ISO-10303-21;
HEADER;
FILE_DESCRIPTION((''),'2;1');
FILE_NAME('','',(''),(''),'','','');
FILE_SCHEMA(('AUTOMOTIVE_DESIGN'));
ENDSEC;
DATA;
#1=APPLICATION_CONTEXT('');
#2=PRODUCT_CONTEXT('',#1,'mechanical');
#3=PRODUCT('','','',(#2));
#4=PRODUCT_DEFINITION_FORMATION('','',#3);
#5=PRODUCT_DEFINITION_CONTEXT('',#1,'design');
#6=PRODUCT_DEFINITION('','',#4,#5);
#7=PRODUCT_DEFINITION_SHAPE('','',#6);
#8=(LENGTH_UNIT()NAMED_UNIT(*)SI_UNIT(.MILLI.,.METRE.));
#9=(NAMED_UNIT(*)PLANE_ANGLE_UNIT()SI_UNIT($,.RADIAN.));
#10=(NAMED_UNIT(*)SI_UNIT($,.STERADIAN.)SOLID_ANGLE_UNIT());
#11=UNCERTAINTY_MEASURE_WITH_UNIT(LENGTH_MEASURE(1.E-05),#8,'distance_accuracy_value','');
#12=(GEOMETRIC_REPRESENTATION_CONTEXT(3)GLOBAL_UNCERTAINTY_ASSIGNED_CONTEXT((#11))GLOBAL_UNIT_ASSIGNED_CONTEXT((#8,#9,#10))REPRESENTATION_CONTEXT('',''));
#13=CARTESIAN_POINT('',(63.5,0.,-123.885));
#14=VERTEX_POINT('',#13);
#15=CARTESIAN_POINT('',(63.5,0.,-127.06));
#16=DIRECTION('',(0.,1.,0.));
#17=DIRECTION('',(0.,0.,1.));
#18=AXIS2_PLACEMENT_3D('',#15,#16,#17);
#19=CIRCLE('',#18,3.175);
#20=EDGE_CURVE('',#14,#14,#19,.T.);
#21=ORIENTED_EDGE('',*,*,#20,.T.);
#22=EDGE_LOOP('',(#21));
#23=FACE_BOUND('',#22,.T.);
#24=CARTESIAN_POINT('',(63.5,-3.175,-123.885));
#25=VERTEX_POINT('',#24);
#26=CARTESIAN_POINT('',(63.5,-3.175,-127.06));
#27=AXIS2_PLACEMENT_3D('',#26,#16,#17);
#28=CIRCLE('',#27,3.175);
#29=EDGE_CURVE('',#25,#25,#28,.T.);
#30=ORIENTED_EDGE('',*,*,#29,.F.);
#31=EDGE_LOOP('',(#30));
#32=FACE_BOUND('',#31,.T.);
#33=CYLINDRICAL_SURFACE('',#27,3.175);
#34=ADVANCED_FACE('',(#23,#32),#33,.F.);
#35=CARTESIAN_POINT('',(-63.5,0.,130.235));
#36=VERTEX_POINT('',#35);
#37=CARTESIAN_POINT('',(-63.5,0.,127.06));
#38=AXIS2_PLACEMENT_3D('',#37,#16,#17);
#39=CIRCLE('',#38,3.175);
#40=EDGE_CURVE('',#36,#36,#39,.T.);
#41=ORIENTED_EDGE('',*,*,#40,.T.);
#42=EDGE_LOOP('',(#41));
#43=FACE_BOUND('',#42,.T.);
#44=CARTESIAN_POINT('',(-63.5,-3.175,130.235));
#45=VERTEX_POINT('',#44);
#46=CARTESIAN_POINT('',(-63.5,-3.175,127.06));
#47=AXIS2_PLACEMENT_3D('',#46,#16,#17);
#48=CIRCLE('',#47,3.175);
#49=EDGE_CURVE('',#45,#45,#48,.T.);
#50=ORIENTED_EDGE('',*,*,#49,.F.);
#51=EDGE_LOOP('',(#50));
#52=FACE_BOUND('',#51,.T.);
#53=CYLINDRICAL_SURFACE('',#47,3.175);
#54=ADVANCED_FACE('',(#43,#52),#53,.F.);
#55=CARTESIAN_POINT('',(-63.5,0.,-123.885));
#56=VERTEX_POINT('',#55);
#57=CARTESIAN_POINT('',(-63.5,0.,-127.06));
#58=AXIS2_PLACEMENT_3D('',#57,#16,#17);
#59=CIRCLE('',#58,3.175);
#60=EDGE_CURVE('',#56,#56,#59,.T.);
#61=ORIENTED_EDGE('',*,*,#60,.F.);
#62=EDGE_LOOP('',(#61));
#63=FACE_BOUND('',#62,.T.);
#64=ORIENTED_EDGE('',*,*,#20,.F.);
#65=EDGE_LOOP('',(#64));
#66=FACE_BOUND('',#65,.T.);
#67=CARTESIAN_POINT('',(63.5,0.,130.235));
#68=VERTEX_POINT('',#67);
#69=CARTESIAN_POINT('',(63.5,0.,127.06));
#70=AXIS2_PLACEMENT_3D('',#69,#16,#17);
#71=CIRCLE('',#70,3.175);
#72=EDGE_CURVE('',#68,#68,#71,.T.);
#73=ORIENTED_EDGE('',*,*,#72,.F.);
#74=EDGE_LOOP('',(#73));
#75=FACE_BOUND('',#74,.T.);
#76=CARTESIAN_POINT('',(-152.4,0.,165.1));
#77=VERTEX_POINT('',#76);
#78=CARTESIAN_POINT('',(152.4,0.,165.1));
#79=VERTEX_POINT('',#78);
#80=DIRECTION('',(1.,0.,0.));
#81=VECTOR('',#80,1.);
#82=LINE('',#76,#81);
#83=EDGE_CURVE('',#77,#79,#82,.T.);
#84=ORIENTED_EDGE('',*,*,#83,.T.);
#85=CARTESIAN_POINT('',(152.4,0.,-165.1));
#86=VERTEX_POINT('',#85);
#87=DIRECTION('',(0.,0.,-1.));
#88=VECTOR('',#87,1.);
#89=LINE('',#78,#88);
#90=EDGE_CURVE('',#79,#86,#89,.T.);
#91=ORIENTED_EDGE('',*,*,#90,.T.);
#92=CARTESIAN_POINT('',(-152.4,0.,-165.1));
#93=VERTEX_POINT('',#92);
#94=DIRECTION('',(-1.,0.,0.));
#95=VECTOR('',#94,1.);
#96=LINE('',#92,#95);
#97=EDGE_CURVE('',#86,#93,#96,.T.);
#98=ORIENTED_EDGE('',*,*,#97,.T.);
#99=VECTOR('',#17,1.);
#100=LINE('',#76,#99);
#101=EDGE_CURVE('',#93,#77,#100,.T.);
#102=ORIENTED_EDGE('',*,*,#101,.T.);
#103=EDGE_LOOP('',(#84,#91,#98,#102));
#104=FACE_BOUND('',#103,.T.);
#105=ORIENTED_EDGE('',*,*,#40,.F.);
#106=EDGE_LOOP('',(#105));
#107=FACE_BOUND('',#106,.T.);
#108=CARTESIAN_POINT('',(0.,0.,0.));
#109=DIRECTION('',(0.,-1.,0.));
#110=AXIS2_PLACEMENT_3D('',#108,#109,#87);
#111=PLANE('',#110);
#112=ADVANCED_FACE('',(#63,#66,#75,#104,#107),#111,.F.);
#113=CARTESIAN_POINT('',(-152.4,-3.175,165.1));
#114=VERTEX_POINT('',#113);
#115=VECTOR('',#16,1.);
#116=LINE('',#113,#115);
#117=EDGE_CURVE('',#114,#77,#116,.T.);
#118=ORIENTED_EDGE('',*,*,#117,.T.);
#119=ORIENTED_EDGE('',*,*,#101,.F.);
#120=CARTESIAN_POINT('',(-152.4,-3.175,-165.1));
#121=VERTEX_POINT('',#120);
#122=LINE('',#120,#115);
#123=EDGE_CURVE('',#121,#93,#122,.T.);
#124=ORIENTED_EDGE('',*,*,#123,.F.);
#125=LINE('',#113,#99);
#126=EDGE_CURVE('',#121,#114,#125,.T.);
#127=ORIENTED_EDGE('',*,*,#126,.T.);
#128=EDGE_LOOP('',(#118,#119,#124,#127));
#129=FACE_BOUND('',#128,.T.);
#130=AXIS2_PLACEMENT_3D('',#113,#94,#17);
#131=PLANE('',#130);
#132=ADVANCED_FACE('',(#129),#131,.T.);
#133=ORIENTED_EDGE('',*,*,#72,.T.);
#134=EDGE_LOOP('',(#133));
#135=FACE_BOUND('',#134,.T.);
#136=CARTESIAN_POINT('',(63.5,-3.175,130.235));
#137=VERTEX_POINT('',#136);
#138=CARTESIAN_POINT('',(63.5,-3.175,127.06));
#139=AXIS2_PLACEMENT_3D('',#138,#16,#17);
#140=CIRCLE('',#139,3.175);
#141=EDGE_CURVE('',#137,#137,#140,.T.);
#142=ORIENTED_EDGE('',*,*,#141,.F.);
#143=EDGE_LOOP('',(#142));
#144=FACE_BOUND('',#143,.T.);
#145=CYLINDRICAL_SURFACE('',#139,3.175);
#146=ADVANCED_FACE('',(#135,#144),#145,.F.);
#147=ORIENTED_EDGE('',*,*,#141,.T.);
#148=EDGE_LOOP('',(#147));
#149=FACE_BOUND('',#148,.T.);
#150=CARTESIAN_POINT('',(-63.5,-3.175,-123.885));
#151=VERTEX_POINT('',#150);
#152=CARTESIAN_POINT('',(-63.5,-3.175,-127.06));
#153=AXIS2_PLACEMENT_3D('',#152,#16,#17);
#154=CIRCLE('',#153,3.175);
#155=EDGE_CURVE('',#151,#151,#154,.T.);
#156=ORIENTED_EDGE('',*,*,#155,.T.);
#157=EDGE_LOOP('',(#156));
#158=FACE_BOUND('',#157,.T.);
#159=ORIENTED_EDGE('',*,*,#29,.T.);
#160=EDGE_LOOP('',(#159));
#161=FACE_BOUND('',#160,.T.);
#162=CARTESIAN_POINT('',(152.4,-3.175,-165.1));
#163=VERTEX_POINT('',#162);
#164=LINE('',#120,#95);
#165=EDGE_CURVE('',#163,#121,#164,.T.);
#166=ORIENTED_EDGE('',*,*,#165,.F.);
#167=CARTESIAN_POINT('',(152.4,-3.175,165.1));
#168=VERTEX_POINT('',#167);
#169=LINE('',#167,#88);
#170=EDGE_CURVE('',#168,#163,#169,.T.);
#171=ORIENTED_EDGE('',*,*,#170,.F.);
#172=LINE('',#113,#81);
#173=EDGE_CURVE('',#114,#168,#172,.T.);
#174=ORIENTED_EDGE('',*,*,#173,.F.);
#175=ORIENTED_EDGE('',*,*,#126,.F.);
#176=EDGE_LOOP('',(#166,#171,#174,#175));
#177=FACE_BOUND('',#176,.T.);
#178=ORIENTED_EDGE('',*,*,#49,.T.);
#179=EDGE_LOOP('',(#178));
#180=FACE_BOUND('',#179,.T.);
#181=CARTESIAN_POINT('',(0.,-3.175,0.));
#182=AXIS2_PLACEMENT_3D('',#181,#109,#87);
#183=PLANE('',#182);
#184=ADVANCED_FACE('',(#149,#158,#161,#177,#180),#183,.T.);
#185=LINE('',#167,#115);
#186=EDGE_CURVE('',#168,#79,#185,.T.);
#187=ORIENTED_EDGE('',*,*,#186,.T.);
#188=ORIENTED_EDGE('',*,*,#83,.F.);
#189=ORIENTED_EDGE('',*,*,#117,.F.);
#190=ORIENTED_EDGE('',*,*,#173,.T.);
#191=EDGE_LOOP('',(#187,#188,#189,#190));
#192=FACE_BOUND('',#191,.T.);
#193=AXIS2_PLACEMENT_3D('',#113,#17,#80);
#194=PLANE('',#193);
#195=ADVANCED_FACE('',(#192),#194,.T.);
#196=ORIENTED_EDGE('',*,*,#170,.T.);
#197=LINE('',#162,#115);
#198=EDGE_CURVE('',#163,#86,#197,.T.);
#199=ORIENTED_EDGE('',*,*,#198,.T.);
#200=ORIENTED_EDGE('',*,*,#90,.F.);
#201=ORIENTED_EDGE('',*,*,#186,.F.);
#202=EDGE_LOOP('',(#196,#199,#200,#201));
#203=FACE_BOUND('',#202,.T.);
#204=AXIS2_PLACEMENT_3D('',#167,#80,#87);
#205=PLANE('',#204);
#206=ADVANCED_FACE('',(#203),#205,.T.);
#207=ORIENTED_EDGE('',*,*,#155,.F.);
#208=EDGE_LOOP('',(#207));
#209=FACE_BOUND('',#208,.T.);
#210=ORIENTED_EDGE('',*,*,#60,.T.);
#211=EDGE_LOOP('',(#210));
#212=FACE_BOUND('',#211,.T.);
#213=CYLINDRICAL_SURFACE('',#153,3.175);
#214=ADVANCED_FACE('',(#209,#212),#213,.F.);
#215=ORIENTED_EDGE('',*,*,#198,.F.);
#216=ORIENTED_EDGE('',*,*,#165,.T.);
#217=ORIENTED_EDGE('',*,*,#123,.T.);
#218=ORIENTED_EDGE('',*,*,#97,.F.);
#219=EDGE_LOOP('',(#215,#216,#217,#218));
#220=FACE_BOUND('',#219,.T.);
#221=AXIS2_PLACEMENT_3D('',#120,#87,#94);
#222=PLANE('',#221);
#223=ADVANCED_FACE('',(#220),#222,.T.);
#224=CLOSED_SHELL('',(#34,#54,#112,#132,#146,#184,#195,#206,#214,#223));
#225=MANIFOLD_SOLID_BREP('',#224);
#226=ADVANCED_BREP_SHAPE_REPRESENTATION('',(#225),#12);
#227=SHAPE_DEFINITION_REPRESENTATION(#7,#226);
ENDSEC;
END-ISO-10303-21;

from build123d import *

# Parameters (mm, degrees)
SKETCH2_W          = 304.8
SKETCH2_H          = 330.2
BASE_FLANGE1_DEPTH = 3.175
SKETCH7_R          = 3.175
CUT_EXTRUDE1_DEPTH = 225.708367946


# Sheet-metal steps are written as plain solids
with BuildPart() as part:
    # Sketch2 → Base-Flange1 (new body)
    with BuildSketch(Plane(origin=(0, 0, 0), x_dir=(1, 0, 0), z_dir=(0, 1, 0))):
        Rectangle(SKETCH2_W, SKETCH2_H)
    extrude(amount=-BASE_FLANGE1_DEPTH)

    # Sketch7 → Cut-Extrude1 (cut, through all)
    with BuildSketch(Plane(origin=(0, 0, 0), x_dir=(1, 0, 0), z_dir=(0, 1, 0))):
        with Locations(Location((-63.5, 127.06, 0), (0, 0, 270))):
            Circle(SKETCH7_R)
        with Locations(Location((63.5, 127.06, 0), (0, 0, 270))):
            Circle(SKETCH7_R)
        with Locations(Location((63.5, -127.06, 0), (0, 0, 270))):
            Circle(SKETCH7_R)
        with Locations(Location((-63.5, -127.06, 0), (0, 0, 270))):
            Circle(SKETCH7_R)
    extrude(amount=-CUT_EXTRUDE1_DEPTH, mode=Mode.SUBTRACT)


solid = part.part
